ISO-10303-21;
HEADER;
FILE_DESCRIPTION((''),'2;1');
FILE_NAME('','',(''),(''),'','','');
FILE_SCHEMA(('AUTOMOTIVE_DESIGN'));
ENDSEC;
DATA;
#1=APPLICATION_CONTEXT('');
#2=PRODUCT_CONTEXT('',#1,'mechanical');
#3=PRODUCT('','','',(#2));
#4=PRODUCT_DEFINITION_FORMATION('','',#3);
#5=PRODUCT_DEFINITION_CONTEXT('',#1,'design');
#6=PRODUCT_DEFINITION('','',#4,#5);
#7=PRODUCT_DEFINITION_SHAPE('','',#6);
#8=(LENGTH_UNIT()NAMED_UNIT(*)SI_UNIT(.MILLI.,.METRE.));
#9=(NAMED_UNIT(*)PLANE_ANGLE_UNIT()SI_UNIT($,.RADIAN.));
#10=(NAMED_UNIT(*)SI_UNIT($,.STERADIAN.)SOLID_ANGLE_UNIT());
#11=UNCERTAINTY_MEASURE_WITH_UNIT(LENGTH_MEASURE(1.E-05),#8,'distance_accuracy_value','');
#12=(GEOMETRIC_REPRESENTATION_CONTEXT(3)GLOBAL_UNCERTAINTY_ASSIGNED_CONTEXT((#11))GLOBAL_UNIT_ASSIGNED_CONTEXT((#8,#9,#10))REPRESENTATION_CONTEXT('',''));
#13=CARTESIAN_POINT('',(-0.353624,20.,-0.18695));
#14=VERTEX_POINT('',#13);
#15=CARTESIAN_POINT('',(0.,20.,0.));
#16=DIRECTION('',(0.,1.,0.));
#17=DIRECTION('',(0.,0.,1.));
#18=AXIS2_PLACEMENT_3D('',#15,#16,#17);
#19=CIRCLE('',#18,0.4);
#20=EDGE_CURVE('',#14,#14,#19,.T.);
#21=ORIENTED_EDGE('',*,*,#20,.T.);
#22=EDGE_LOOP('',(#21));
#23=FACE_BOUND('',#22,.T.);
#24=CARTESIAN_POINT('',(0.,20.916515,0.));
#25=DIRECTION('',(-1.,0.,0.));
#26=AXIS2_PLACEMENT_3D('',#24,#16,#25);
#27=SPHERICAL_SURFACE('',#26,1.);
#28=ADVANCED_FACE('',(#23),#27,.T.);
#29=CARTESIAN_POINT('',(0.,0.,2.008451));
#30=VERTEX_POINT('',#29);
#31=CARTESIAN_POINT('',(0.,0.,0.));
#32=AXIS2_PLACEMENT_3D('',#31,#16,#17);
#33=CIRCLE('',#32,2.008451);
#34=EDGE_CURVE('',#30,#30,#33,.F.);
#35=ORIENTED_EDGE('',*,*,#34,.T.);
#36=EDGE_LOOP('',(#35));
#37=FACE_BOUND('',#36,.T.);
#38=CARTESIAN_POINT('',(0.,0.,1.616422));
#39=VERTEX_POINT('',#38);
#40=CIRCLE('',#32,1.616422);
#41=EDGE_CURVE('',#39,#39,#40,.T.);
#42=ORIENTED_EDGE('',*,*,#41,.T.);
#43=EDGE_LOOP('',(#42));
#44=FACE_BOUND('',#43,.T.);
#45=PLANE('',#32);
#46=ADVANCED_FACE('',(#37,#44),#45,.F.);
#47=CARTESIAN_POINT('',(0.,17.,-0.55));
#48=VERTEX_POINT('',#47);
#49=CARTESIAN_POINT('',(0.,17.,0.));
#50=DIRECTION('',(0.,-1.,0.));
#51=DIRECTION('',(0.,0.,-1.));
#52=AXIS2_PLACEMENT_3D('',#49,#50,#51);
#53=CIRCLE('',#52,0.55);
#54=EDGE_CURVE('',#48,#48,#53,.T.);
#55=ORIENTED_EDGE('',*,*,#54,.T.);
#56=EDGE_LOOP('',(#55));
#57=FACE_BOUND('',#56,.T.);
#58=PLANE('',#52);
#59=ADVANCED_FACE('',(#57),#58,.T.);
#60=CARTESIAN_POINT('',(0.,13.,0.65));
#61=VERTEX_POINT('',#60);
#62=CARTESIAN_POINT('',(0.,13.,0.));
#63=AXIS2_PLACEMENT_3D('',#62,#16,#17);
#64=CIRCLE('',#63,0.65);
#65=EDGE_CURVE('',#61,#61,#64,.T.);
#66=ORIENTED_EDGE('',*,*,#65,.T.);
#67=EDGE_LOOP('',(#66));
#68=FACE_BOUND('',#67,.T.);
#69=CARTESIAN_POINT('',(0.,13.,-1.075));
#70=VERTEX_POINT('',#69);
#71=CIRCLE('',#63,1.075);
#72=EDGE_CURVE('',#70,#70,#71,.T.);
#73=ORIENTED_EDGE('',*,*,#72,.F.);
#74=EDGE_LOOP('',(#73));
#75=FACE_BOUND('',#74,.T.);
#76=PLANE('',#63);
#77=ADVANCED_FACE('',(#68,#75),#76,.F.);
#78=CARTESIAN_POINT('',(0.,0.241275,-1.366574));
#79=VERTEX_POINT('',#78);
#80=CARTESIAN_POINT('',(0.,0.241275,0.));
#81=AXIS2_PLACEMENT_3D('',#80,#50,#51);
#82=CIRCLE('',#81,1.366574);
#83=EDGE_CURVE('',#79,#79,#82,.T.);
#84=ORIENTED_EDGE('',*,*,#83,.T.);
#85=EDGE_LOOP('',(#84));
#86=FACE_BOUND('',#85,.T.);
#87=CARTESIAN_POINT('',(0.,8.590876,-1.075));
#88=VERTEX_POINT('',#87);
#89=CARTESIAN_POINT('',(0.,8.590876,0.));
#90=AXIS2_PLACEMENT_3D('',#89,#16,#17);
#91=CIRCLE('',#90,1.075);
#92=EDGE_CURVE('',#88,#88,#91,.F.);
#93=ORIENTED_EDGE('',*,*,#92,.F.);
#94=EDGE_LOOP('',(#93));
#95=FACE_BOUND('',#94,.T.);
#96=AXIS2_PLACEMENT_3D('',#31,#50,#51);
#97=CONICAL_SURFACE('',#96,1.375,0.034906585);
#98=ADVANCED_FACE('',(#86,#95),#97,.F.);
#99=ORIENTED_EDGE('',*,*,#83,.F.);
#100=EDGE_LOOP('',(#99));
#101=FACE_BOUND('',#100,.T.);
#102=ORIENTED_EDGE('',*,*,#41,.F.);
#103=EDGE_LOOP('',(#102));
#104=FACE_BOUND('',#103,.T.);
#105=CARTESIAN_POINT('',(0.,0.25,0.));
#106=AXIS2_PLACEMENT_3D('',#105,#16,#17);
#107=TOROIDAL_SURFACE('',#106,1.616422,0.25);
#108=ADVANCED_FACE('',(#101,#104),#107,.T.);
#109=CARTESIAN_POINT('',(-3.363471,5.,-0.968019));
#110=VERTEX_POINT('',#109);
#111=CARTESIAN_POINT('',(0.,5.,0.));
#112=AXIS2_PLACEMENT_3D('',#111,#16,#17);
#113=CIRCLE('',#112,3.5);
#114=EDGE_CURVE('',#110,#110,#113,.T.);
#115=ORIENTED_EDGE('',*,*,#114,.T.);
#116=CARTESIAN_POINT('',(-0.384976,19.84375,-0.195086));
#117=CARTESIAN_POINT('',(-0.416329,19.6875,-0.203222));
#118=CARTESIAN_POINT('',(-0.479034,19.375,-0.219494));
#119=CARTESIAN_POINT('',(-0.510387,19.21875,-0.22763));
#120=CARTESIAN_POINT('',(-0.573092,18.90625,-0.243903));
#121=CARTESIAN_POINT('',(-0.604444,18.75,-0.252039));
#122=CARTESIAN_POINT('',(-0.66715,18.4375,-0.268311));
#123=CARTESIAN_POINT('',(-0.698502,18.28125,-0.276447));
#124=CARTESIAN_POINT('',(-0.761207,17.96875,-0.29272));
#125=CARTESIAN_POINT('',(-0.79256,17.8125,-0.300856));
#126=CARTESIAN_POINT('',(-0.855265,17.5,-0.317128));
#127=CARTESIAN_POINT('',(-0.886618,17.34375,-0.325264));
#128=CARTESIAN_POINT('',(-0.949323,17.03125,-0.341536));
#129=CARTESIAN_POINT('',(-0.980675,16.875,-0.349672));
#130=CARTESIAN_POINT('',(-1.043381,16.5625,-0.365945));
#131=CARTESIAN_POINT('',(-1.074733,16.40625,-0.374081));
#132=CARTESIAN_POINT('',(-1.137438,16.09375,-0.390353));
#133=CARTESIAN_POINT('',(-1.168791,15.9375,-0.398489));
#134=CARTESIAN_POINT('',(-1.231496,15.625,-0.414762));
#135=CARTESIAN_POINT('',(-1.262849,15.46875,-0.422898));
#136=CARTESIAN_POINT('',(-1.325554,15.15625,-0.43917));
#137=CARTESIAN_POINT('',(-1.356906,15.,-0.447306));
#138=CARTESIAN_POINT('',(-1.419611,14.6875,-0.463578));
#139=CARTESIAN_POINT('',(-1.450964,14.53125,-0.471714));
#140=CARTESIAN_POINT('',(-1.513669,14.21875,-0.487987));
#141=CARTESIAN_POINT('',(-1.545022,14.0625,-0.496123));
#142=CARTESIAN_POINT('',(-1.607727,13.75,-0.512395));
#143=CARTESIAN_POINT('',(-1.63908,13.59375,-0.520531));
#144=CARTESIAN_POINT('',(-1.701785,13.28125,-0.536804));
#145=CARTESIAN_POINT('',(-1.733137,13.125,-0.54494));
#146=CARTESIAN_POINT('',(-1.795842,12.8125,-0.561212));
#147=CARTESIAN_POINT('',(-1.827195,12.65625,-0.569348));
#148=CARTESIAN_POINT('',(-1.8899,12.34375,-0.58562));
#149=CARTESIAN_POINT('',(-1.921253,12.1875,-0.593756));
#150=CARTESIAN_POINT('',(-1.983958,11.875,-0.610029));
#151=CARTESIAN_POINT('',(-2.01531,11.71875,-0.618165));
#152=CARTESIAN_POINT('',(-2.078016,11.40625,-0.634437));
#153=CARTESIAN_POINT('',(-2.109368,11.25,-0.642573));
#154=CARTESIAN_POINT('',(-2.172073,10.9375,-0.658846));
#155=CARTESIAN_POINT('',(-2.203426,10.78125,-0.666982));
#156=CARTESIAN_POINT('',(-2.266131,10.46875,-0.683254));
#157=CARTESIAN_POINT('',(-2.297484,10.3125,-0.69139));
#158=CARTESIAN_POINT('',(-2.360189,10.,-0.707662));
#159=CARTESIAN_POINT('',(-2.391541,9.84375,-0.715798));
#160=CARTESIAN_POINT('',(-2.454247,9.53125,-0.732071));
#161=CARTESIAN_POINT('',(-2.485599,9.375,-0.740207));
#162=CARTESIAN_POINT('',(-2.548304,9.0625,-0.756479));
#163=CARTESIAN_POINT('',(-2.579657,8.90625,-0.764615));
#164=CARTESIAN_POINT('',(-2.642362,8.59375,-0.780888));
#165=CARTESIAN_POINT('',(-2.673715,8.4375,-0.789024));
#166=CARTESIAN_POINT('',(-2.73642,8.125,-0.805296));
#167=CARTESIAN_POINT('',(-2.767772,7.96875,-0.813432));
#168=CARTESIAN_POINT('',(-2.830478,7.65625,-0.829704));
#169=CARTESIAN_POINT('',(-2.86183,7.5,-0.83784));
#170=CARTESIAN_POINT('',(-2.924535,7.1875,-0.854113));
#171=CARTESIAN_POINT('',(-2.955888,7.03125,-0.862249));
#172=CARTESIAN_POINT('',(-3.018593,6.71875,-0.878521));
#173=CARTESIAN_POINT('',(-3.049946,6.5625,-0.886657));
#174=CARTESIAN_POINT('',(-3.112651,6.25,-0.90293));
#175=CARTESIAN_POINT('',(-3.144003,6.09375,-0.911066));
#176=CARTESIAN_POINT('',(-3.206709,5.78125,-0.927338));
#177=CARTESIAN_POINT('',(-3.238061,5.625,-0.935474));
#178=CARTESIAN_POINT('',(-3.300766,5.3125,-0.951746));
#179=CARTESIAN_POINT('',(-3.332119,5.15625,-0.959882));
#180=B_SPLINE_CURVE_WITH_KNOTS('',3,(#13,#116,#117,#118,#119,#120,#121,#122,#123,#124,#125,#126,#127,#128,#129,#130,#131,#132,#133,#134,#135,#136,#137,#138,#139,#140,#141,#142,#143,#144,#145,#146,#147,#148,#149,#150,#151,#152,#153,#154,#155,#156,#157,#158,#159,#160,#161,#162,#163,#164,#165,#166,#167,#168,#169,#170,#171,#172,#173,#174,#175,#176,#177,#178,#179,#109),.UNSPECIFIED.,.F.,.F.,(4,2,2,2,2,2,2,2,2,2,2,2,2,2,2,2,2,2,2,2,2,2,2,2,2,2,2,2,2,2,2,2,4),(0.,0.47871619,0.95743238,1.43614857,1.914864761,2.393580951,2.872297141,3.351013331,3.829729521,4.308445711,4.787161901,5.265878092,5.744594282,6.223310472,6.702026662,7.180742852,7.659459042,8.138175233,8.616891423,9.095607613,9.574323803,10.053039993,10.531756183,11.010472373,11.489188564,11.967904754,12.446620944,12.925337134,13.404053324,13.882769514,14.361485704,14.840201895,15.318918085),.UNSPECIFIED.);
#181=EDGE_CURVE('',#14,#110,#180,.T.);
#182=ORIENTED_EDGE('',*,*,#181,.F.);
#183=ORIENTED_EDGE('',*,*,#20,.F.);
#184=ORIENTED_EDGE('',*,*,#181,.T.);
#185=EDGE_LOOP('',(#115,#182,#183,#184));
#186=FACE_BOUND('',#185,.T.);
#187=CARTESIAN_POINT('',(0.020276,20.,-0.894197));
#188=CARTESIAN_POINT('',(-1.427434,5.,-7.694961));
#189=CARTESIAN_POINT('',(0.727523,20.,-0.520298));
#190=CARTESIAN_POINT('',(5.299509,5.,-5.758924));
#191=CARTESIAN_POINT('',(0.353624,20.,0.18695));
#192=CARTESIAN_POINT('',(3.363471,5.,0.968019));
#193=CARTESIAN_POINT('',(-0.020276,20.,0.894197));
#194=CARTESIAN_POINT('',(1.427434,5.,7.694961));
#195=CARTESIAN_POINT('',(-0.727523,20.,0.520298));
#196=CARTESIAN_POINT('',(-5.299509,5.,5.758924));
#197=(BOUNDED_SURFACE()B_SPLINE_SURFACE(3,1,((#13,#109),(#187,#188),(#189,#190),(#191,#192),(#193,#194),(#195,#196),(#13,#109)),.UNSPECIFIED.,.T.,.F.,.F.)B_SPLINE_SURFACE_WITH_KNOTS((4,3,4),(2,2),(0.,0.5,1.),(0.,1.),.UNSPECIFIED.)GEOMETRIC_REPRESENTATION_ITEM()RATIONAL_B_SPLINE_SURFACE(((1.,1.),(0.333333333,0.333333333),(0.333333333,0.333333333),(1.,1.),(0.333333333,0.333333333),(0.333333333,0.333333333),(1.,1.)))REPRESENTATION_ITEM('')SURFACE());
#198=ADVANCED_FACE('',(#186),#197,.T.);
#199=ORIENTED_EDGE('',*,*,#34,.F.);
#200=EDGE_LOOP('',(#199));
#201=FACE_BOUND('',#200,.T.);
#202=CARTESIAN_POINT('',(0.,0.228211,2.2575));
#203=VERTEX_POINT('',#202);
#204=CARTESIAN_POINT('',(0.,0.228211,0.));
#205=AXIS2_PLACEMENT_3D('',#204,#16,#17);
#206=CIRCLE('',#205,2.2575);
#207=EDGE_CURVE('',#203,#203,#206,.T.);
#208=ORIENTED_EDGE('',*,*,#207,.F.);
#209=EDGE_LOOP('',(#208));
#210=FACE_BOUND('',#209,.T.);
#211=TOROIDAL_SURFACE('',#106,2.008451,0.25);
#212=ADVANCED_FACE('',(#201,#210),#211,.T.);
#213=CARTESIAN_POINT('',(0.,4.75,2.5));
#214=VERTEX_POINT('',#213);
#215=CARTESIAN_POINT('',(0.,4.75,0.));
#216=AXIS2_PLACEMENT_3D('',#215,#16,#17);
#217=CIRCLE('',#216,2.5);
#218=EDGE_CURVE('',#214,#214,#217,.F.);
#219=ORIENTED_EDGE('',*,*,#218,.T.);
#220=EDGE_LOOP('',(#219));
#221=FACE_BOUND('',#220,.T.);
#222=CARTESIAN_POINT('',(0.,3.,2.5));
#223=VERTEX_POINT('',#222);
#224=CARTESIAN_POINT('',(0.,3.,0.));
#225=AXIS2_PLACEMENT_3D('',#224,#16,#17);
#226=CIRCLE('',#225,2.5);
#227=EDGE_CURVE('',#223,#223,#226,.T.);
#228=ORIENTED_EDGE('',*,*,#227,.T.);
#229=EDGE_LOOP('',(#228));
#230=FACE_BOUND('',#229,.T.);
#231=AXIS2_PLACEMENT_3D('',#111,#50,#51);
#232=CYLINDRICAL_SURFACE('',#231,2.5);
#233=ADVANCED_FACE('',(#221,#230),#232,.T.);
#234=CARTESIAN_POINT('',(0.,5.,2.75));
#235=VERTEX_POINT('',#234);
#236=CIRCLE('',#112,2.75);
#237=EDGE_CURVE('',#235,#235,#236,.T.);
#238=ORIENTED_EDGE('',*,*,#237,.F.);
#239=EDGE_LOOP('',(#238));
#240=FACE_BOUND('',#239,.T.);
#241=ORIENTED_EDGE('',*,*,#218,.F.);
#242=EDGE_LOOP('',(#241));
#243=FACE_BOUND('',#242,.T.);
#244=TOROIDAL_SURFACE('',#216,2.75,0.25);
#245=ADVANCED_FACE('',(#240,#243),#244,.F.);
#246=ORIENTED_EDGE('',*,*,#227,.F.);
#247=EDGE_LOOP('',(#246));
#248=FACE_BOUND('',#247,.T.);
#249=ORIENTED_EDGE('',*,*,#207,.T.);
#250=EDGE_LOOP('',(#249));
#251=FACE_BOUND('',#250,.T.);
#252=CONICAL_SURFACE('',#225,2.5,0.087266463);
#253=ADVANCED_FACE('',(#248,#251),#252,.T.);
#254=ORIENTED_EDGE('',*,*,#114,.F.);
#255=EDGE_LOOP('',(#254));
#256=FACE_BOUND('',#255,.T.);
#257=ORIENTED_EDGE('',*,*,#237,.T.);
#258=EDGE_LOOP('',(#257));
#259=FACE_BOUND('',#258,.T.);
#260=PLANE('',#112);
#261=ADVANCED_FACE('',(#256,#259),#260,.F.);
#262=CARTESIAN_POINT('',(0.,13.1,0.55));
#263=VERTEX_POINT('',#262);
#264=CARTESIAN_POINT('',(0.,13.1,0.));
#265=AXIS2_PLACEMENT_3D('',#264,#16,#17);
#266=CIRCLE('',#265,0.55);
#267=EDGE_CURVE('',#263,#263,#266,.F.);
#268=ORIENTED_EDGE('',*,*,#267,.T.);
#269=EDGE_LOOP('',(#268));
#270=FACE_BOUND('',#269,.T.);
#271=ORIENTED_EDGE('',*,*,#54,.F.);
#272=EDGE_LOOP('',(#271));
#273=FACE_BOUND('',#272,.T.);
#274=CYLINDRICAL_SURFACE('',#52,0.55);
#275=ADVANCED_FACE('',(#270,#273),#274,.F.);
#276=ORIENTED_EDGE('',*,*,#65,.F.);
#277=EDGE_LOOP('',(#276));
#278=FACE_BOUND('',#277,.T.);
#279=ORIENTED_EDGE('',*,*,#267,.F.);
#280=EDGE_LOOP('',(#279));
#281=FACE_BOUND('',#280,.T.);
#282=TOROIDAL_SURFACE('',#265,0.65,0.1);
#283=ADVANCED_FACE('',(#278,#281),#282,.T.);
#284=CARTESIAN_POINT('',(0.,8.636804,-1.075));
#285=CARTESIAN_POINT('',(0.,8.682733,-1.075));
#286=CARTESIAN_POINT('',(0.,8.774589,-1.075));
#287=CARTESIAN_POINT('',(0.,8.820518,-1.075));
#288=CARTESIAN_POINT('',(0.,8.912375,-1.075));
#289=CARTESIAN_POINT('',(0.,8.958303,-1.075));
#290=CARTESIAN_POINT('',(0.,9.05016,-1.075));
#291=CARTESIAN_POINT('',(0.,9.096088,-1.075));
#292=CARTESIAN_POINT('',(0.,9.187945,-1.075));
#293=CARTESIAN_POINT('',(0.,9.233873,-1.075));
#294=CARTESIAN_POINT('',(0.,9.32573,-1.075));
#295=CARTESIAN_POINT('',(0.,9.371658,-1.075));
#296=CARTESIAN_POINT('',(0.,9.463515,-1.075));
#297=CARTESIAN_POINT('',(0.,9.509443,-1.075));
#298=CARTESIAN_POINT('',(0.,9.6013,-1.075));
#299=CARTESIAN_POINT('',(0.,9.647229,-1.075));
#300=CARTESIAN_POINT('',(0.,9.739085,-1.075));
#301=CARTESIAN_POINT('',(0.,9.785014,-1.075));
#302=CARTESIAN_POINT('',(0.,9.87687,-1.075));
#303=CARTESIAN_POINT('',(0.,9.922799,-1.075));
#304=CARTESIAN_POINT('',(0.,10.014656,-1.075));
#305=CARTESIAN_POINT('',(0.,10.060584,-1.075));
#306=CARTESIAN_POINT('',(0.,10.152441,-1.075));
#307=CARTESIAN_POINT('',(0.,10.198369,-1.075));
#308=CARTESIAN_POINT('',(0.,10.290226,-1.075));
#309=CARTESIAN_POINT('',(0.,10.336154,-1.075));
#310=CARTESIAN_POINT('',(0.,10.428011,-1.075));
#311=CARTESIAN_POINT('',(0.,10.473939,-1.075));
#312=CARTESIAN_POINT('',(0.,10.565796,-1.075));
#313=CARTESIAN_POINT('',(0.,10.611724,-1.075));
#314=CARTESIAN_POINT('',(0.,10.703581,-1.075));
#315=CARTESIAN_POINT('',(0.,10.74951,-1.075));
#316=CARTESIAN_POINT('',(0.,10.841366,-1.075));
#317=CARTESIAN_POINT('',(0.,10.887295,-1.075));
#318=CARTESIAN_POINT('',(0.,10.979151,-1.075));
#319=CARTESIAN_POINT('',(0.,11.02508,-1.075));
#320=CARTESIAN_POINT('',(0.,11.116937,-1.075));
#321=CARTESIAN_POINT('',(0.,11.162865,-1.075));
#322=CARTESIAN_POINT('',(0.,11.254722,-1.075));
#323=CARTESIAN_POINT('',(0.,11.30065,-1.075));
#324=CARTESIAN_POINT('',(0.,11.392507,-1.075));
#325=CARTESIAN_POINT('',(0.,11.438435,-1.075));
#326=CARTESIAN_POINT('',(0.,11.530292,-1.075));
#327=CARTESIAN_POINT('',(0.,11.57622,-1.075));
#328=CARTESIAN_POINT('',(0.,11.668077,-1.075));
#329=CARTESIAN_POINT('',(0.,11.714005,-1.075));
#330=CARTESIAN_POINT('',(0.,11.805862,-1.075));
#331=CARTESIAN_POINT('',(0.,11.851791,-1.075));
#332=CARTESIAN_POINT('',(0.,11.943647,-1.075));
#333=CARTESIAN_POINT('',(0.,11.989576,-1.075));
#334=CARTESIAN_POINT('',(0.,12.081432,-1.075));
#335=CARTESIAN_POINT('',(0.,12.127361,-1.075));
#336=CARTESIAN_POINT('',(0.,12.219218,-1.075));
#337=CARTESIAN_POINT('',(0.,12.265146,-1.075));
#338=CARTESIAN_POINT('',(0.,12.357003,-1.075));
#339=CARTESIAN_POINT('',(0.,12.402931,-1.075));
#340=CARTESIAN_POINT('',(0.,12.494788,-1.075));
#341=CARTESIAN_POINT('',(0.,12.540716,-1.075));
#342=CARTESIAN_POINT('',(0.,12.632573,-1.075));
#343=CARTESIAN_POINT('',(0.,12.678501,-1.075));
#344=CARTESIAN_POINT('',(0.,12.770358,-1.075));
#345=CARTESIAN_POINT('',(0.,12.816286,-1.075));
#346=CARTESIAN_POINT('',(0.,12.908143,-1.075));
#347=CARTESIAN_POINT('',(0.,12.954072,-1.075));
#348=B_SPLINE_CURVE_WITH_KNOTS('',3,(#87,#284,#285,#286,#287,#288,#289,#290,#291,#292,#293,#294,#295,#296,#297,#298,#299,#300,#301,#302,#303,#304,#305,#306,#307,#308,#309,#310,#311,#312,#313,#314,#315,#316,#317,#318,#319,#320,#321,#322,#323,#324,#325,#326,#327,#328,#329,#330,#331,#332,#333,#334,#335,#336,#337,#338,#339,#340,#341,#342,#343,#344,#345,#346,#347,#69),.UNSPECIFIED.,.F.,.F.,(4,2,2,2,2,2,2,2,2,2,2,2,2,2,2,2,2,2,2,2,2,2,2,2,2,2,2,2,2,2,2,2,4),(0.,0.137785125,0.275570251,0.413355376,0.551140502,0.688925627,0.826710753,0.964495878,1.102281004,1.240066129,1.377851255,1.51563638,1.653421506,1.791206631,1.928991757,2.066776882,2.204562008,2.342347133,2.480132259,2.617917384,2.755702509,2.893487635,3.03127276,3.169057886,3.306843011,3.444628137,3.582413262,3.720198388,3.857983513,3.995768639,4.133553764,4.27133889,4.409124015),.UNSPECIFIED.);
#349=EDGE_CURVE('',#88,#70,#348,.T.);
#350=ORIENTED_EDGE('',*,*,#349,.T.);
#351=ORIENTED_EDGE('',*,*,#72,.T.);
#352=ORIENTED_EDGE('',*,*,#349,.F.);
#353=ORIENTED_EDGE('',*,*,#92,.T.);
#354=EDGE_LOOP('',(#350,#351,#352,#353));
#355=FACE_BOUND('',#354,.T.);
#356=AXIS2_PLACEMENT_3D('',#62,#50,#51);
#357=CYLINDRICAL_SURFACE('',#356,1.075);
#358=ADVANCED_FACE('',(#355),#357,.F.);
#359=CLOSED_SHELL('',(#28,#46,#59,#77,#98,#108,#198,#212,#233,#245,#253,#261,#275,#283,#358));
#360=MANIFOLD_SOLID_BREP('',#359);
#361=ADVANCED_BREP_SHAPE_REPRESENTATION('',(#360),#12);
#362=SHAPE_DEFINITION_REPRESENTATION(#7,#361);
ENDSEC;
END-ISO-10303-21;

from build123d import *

# Parameters (mm, degrees)
SKETCH1_R           = 2.5
BOSS_EXTRUDE1_DEPTH = 5
SKETCH4_R           = 1.075
CUT_EXTRUDE1_DEPTH  = 13
CHAMFER1_SIZE       = 0.3
CHAMFER1_SIZE2      = 8.590875985
CHAMFER2_SIZE       = 3
CHAMFER2_SIZE2      = 0.262465991
FILLET2_R           = 0.25
FILLET4_R           = 0.25
SKETCH6_R           = 0.55
CUT_EXTRUDE2_DEPTH  = 4
FILLET5_R           = 0.1


with BuildPart() as part:
    # Sketch1 → Boss-Extrude1 (new body)
    with BuildSketch(Plane(origin=(0, 0, 0), x_dir=(1, 0, 0), z_dir=(0, 1, 0))):
        with Locations(Location((0, 0, 0), (0, 0, 270))):
            Circle(SKETCH1_R)
    extrude(amount=BOSS_EXTRUDE1_DEPTH)

    # Loft1: read off the stored shape, not the designer's step
    # Loft1: loft between two sections, ruled curve by curve
    loft1_from = [
        Edge.make_bspline([(-0.353623786, 20, -0.186949774), (0.020275763, 20, -0.894197346), (0.727523334, 20, -0.520297797), (0.353623786, 20, 0.186949774), (-0.020275763, 20, 0.894197346), (-0.727523334, 20, 0.520297797), (-0.353623786, 20, -0.186949774)], [0, 0, 0, 0, 0.5, 0.5, 0.5, 1, 1, 1, 1], 3, [1, 0.333333333, 0.333333333, 1, 0.333333333, 0.333333333, 1]),
    ]
    loft1_to = [
        Edge.make_bspline([(-3.363471416, 5, -0.968018612), (-1.427434193, 5, -7.694961444), (5.299508639, 5, -5.758924221), (3.363471416, 5, 0.968018612), (1.427434193, 5, 7.694961444), (-5.299508639, 5, 5.758924221), (-3.363471416, 5, -0.968018612)], [0, 0, 0, 0, 0.5, 0.5, 0.5, 1, 1, 1, 1], 3, [1, 0.333333333, 0.333333333, 1, 0.333333333, 0.333333333, 1]),
    ]
    loft1 = Solid(Shell([*[Face.make_surface_from_curves(loft1_from[k], loft1_to[k]) for k in range(1)], Face(Wire(loft1_from)), Face(Wire(loft1_to))]))
    add(loft1)

    # Sketch4 → Cut-Extrude1 (cut)
    with BuildSketch(Plane(origin=(0, 0, 0), x_dir=(1, 0, 0), z_dir=(0, 1, 0))):
        with Locations(Location((0, 0, 0), (0, 0, 90))):
            Circle(SKETCH4_R)
    extrude(amount=CUT_EXTRUDE1_DEPTH, mode=Mode.SUBTRACT)

    # Chamfer1
    chamfer1_edges = [part.edges().sort_by_distance(p)[0] for p in [
        (0, 0, 1.075),
    ]]
    chamfer1_side = [part.faces().sort_by_distance(p)[0] for p in [
        (0, 0, -2.429289322),
    ]]
    chamfer(chamfer1_edges, length=CHAMFER1_SIZE, length2=CHAMFER1_SIZE2, reference=chamfer1_side[0])

    # Chamfer2
    chamfer2_edges = [part.edges().sort_by_distance(p)[0] for p in [
        (0, 0, -2.5),
    ]]
    chamfer2_side = [part.faces().sort_by_distance(p)[0] for p in [
        (0, 2.5, -2.5),
    ]]
    chamfer(chamfer2_edges, length=CHAMFER2_SIZE, length2=CHAMFER2_SIZE2, reference=chamfer2_side[0])

    # Fillet2
    fillet2_edges = [part.edges().sort_by_distance(p)[0] for p in [
        (0, 5, -2.5),
    ]]
    fillet(fillet2_edges, radius=FILLET2_R)

    # Fillet4
    fillet4_edges = [part.edges().sort_by_distance(p)[0] for p in [
        (0, 0, 1.375),
        (0, 0, -2.237534009),
    ]]
    fillet(fillet4_edges, radius=FILLET4_R)

    # Sketch5 → Revolve1 (revolve)
    with BuildSketch(Plane.XY):
        with BuildLine():
            Line((0, 21.916515139), (0, 19.916515139))
            ThreePointArc((0, 19.916515139), (-1, 20.916515139), (0, 21.916515139))
        make_face()
    revolve(axis=Axis((0, 24.727188158, 0), (0, -1, 0)))

    # Sketch6 → Cut-Extrude2 (cut)
    with BuildSketch(Plane.XZ.offset(-13)):
        with Locations(Location((0, 0, 0), (0, 0, 270))):
            Circle(SKETCH6_R)
    extrude(amount=-CUT_EXTRUDE2_DEPTH, mode=Mode.SUBTRACT)

    # Fillet5
    fillet5_edges = [part.edges().sort_by_distance(p)[0] for p in [
        (0, 13, 0.55),
    ]]
    fillet(fillet5_edges, radius=FILLET5_R)


solid = part.part
